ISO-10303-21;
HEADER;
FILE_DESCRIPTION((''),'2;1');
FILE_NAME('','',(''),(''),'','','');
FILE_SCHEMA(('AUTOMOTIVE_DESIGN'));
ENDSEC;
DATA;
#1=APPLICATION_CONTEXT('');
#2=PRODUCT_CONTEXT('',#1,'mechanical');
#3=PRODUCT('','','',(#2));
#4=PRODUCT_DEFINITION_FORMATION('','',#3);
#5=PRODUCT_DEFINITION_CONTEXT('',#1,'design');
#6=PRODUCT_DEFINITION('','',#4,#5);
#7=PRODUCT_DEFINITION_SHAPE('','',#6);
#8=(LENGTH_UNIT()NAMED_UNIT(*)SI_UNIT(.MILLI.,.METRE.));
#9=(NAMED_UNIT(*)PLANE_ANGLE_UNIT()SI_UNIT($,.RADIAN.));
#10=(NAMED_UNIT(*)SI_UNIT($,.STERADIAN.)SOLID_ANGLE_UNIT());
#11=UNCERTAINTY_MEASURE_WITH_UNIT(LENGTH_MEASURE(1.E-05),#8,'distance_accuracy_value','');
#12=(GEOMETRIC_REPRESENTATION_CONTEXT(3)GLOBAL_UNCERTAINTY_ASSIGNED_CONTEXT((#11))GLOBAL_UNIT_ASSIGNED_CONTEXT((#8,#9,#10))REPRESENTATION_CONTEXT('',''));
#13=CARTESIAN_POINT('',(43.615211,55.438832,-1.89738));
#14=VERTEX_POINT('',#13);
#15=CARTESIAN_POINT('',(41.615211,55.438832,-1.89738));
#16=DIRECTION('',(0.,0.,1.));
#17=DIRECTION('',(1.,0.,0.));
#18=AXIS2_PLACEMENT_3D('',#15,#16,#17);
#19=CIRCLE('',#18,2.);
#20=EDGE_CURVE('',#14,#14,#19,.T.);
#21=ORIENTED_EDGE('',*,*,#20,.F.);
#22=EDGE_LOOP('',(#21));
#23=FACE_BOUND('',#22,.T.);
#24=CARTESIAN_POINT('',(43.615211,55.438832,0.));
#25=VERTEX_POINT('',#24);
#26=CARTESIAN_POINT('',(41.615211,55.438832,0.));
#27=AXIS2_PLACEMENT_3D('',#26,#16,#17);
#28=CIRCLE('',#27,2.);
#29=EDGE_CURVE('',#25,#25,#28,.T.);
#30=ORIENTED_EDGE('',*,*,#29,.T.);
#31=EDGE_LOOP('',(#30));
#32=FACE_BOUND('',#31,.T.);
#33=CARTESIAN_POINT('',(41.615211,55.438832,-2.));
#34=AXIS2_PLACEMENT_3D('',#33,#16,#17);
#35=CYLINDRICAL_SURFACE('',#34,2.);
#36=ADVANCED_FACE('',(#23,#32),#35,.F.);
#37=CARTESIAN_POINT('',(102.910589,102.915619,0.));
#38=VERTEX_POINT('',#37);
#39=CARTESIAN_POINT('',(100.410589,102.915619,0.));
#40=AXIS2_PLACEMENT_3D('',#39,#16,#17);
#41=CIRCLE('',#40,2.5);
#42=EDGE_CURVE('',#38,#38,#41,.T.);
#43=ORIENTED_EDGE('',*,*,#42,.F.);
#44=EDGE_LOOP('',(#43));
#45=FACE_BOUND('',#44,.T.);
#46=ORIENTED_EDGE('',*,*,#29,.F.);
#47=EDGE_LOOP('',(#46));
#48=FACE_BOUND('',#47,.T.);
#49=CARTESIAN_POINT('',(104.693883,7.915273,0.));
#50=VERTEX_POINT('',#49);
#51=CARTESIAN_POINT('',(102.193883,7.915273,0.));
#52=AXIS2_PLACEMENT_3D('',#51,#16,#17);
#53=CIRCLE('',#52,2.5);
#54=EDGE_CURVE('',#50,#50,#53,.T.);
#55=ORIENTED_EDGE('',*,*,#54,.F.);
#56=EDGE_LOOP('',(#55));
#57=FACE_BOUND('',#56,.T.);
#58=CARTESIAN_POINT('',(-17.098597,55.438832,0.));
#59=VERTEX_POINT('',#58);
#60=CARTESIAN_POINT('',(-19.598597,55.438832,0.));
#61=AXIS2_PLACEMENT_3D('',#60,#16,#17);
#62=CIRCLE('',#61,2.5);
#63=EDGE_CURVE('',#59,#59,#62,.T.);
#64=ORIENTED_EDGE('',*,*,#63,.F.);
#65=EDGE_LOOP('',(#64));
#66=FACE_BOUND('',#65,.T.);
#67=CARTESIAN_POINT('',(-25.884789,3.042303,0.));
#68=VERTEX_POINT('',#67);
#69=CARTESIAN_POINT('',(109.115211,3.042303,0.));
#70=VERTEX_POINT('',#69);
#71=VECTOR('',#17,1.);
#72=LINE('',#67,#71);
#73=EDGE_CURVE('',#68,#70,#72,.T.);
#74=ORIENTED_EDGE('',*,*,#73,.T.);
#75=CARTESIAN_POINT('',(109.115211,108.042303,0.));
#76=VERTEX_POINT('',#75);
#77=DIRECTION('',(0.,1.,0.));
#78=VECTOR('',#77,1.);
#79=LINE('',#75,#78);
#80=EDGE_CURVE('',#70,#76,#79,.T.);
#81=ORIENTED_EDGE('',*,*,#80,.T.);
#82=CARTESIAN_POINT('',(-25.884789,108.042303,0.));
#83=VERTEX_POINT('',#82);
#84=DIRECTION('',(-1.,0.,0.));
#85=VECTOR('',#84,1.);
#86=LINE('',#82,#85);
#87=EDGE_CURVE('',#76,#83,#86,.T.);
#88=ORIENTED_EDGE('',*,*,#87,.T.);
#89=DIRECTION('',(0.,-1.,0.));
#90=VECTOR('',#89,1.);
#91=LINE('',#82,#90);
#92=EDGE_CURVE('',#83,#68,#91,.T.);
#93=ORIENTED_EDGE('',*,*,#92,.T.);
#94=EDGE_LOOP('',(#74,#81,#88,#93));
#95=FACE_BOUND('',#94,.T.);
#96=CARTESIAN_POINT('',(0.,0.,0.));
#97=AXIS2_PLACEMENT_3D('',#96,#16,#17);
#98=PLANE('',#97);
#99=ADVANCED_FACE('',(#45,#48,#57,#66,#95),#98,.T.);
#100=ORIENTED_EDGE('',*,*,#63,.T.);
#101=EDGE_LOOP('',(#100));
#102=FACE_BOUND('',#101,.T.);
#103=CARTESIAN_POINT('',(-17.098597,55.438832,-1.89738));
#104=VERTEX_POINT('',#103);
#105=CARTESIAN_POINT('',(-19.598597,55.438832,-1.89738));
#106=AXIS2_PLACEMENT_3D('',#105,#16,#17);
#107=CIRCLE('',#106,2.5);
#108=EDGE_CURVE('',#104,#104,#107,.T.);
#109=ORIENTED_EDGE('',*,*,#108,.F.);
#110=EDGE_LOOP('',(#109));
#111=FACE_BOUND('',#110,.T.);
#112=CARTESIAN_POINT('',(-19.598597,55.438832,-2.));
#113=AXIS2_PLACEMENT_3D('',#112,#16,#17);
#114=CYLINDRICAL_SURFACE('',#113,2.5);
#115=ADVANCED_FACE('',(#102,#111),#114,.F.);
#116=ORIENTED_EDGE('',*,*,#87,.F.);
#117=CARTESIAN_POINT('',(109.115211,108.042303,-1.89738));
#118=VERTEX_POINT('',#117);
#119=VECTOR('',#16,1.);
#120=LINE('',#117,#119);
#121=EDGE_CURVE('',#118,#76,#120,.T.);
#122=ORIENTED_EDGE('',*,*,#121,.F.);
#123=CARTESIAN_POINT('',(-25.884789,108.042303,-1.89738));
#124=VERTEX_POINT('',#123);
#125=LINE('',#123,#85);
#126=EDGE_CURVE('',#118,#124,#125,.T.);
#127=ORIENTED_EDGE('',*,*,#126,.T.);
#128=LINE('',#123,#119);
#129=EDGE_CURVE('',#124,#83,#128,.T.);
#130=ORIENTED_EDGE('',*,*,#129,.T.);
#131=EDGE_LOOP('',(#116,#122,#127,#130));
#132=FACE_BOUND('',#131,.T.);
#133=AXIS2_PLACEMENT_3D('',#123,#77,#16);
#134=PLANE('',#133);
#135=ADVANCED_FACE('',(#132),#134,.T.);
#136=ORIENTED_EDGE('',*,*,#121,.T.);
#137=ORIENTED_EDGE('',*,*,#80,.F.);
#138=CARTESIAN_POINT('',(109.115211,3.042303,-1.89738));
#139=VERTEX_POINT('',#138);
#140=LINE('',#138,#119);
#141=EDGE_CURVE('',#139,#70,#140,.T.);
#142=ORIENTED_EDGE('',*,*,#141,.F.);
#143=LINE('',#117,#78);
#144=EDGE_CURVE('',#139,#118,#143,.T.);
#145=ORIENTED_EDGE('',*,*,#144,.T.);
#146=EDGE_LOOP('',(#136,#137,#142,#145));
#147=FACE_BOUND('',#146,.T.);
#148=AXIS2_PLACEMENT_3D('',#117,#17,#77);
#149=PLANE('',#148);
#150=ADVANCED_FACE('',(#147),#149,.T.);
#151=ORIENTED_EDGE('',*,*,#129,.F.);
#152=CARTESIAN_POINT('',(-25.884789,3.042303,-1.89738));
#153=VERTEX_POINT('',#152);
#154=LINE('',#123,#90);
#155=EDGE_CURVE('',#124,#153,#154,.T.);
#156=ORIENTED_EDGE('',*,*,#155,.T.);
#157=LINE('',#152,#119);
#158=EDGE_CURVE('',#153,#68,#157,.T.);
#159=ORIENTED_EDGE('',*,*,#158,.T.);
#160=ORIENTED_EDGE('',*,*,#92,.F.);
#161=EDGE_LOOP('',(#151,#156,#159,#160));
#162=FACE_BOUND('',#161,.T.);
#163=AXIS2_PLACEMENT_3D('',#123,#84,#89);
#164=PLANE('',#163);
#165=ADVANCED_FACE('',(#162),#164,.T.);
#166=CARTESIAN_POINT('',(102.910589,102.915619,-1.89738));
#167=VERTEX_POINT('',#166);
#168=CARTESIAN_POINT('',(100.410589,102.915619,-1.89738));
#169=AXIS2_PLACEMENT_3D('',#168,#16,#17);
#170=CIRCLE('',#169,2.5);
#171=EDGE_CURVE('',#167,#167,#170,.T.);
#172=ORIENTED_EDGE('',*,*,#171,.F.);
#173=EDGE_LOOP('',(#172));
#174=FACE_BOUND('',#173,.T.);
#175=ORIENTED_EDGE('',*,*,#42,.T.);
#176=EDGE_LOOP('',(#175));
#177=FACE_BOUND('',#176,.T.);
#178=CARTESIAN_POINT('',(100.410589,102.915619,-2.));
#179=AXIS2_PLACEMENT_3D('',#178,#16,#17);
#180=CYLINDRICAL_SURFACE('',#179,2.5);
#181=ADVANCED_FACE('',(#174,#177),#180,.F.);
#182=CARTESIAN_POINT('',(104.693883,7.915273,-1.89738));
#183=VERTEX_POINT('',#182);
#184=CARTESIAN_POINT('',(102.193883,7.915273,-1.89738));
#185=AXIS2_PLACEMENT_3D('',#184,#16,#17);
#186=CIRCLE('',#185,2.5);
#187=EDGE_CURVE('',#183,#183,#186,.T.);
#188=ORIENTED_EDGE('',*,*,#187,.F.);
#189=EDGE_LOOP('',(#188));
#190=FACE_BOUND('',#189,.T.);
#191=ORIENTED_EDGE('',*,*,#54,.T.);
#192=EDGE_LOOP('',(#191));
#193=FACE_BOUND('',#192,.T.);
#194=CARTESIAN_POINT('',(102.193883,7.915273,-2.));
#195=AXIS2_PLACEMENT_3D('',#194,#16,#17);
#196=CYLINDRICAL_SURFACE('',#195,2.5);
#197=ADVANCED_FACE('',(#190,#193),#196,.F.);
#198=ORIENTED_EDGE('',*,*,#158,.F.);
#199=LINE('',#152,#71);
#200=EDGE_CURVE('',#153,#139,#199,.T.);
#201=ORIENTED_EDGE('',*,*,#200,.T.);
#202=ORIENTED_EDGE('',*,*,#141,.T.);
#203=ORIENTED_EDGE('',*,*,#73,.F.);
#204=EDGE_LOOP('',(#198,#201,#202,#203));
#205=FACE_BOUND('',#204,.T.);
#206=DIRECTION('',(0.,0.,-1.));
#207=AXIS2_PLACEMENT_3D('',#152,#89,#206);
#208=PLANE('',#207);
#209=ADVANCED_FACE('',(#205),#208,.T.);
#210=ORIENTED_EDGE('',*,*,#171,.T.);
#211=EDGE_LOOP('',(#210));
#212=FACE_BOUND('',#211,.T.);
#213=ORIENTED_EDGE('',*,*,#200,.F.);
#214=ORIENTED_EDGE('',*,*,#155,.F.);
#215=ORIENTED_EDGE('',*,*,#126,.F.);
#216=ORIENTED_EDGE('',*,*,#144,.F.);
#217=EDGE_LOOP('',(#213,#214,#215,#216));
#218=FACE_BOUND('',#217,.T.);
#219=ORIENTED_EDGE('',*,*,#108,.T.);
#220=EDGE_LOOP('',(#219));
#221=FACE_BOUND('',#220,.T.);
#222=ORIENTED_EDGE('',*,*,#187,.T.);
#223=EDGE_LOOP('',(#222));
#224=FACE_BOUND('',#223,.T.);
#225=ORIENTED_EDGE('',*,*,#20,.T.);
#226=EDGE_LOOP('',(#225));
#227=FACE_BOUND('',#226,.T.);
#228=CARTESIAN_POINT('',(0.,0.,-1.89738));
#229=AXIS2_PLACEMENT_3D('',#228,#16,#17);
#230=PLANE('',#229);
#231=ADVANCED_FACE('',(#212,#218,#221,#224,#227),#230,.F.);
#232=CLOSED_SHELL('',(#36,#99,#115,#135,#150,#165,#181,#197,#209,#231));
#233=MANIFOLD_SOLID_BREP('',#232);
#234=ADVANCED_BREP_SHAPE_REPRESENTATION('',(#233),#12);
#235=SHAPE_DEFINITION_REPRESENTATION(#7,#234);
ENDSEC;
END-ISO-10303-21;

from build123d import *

# Parameters (mm, degrees)
SKETCH1_W          = 135
SKETCH1_H          = 105
BASE_FLANGE1_DEPTH = 1.89738
SKETCH6_R          = 2.5
SKETCH6_R_2        = 2
CUT_EXTRUDE1_DEPTH = 2


# Sheet-metal steps are written as plain solids
with BuildPart() as part:
    # Sketch1 → Base-Flange1 (new body)
    with BuildSketch(Plane.XY):
        with Locations((41.615210843, 55.542303175)):
            Rectangle(SKETCH1_W, SKETCH1_H)
    extrude(amount=-BASE_FLANGE1_DEPTH)

    # Sketch6 → Cut-Extrude1 (cut)
    with BuildSketch(Plane.XY):
        with Locations((-19.598596989, 55.438832042)):
            Circle(SKETCH6_R)
        with Locations((100.410588716, 102.91561949)):
            Circle(SKETCH6_R)
        with Locations((102.193882869, 7.915272769)):
            Circle(SKETCH6_R)
        with Locations((41.615210843, 55.438832042)):
            Circle(SKETCH6_R_2)
    extrude(amount=-CUT_EXTRUDE1_DEPTH, mode=Mode.SUBTRACT)


solid = part.part
